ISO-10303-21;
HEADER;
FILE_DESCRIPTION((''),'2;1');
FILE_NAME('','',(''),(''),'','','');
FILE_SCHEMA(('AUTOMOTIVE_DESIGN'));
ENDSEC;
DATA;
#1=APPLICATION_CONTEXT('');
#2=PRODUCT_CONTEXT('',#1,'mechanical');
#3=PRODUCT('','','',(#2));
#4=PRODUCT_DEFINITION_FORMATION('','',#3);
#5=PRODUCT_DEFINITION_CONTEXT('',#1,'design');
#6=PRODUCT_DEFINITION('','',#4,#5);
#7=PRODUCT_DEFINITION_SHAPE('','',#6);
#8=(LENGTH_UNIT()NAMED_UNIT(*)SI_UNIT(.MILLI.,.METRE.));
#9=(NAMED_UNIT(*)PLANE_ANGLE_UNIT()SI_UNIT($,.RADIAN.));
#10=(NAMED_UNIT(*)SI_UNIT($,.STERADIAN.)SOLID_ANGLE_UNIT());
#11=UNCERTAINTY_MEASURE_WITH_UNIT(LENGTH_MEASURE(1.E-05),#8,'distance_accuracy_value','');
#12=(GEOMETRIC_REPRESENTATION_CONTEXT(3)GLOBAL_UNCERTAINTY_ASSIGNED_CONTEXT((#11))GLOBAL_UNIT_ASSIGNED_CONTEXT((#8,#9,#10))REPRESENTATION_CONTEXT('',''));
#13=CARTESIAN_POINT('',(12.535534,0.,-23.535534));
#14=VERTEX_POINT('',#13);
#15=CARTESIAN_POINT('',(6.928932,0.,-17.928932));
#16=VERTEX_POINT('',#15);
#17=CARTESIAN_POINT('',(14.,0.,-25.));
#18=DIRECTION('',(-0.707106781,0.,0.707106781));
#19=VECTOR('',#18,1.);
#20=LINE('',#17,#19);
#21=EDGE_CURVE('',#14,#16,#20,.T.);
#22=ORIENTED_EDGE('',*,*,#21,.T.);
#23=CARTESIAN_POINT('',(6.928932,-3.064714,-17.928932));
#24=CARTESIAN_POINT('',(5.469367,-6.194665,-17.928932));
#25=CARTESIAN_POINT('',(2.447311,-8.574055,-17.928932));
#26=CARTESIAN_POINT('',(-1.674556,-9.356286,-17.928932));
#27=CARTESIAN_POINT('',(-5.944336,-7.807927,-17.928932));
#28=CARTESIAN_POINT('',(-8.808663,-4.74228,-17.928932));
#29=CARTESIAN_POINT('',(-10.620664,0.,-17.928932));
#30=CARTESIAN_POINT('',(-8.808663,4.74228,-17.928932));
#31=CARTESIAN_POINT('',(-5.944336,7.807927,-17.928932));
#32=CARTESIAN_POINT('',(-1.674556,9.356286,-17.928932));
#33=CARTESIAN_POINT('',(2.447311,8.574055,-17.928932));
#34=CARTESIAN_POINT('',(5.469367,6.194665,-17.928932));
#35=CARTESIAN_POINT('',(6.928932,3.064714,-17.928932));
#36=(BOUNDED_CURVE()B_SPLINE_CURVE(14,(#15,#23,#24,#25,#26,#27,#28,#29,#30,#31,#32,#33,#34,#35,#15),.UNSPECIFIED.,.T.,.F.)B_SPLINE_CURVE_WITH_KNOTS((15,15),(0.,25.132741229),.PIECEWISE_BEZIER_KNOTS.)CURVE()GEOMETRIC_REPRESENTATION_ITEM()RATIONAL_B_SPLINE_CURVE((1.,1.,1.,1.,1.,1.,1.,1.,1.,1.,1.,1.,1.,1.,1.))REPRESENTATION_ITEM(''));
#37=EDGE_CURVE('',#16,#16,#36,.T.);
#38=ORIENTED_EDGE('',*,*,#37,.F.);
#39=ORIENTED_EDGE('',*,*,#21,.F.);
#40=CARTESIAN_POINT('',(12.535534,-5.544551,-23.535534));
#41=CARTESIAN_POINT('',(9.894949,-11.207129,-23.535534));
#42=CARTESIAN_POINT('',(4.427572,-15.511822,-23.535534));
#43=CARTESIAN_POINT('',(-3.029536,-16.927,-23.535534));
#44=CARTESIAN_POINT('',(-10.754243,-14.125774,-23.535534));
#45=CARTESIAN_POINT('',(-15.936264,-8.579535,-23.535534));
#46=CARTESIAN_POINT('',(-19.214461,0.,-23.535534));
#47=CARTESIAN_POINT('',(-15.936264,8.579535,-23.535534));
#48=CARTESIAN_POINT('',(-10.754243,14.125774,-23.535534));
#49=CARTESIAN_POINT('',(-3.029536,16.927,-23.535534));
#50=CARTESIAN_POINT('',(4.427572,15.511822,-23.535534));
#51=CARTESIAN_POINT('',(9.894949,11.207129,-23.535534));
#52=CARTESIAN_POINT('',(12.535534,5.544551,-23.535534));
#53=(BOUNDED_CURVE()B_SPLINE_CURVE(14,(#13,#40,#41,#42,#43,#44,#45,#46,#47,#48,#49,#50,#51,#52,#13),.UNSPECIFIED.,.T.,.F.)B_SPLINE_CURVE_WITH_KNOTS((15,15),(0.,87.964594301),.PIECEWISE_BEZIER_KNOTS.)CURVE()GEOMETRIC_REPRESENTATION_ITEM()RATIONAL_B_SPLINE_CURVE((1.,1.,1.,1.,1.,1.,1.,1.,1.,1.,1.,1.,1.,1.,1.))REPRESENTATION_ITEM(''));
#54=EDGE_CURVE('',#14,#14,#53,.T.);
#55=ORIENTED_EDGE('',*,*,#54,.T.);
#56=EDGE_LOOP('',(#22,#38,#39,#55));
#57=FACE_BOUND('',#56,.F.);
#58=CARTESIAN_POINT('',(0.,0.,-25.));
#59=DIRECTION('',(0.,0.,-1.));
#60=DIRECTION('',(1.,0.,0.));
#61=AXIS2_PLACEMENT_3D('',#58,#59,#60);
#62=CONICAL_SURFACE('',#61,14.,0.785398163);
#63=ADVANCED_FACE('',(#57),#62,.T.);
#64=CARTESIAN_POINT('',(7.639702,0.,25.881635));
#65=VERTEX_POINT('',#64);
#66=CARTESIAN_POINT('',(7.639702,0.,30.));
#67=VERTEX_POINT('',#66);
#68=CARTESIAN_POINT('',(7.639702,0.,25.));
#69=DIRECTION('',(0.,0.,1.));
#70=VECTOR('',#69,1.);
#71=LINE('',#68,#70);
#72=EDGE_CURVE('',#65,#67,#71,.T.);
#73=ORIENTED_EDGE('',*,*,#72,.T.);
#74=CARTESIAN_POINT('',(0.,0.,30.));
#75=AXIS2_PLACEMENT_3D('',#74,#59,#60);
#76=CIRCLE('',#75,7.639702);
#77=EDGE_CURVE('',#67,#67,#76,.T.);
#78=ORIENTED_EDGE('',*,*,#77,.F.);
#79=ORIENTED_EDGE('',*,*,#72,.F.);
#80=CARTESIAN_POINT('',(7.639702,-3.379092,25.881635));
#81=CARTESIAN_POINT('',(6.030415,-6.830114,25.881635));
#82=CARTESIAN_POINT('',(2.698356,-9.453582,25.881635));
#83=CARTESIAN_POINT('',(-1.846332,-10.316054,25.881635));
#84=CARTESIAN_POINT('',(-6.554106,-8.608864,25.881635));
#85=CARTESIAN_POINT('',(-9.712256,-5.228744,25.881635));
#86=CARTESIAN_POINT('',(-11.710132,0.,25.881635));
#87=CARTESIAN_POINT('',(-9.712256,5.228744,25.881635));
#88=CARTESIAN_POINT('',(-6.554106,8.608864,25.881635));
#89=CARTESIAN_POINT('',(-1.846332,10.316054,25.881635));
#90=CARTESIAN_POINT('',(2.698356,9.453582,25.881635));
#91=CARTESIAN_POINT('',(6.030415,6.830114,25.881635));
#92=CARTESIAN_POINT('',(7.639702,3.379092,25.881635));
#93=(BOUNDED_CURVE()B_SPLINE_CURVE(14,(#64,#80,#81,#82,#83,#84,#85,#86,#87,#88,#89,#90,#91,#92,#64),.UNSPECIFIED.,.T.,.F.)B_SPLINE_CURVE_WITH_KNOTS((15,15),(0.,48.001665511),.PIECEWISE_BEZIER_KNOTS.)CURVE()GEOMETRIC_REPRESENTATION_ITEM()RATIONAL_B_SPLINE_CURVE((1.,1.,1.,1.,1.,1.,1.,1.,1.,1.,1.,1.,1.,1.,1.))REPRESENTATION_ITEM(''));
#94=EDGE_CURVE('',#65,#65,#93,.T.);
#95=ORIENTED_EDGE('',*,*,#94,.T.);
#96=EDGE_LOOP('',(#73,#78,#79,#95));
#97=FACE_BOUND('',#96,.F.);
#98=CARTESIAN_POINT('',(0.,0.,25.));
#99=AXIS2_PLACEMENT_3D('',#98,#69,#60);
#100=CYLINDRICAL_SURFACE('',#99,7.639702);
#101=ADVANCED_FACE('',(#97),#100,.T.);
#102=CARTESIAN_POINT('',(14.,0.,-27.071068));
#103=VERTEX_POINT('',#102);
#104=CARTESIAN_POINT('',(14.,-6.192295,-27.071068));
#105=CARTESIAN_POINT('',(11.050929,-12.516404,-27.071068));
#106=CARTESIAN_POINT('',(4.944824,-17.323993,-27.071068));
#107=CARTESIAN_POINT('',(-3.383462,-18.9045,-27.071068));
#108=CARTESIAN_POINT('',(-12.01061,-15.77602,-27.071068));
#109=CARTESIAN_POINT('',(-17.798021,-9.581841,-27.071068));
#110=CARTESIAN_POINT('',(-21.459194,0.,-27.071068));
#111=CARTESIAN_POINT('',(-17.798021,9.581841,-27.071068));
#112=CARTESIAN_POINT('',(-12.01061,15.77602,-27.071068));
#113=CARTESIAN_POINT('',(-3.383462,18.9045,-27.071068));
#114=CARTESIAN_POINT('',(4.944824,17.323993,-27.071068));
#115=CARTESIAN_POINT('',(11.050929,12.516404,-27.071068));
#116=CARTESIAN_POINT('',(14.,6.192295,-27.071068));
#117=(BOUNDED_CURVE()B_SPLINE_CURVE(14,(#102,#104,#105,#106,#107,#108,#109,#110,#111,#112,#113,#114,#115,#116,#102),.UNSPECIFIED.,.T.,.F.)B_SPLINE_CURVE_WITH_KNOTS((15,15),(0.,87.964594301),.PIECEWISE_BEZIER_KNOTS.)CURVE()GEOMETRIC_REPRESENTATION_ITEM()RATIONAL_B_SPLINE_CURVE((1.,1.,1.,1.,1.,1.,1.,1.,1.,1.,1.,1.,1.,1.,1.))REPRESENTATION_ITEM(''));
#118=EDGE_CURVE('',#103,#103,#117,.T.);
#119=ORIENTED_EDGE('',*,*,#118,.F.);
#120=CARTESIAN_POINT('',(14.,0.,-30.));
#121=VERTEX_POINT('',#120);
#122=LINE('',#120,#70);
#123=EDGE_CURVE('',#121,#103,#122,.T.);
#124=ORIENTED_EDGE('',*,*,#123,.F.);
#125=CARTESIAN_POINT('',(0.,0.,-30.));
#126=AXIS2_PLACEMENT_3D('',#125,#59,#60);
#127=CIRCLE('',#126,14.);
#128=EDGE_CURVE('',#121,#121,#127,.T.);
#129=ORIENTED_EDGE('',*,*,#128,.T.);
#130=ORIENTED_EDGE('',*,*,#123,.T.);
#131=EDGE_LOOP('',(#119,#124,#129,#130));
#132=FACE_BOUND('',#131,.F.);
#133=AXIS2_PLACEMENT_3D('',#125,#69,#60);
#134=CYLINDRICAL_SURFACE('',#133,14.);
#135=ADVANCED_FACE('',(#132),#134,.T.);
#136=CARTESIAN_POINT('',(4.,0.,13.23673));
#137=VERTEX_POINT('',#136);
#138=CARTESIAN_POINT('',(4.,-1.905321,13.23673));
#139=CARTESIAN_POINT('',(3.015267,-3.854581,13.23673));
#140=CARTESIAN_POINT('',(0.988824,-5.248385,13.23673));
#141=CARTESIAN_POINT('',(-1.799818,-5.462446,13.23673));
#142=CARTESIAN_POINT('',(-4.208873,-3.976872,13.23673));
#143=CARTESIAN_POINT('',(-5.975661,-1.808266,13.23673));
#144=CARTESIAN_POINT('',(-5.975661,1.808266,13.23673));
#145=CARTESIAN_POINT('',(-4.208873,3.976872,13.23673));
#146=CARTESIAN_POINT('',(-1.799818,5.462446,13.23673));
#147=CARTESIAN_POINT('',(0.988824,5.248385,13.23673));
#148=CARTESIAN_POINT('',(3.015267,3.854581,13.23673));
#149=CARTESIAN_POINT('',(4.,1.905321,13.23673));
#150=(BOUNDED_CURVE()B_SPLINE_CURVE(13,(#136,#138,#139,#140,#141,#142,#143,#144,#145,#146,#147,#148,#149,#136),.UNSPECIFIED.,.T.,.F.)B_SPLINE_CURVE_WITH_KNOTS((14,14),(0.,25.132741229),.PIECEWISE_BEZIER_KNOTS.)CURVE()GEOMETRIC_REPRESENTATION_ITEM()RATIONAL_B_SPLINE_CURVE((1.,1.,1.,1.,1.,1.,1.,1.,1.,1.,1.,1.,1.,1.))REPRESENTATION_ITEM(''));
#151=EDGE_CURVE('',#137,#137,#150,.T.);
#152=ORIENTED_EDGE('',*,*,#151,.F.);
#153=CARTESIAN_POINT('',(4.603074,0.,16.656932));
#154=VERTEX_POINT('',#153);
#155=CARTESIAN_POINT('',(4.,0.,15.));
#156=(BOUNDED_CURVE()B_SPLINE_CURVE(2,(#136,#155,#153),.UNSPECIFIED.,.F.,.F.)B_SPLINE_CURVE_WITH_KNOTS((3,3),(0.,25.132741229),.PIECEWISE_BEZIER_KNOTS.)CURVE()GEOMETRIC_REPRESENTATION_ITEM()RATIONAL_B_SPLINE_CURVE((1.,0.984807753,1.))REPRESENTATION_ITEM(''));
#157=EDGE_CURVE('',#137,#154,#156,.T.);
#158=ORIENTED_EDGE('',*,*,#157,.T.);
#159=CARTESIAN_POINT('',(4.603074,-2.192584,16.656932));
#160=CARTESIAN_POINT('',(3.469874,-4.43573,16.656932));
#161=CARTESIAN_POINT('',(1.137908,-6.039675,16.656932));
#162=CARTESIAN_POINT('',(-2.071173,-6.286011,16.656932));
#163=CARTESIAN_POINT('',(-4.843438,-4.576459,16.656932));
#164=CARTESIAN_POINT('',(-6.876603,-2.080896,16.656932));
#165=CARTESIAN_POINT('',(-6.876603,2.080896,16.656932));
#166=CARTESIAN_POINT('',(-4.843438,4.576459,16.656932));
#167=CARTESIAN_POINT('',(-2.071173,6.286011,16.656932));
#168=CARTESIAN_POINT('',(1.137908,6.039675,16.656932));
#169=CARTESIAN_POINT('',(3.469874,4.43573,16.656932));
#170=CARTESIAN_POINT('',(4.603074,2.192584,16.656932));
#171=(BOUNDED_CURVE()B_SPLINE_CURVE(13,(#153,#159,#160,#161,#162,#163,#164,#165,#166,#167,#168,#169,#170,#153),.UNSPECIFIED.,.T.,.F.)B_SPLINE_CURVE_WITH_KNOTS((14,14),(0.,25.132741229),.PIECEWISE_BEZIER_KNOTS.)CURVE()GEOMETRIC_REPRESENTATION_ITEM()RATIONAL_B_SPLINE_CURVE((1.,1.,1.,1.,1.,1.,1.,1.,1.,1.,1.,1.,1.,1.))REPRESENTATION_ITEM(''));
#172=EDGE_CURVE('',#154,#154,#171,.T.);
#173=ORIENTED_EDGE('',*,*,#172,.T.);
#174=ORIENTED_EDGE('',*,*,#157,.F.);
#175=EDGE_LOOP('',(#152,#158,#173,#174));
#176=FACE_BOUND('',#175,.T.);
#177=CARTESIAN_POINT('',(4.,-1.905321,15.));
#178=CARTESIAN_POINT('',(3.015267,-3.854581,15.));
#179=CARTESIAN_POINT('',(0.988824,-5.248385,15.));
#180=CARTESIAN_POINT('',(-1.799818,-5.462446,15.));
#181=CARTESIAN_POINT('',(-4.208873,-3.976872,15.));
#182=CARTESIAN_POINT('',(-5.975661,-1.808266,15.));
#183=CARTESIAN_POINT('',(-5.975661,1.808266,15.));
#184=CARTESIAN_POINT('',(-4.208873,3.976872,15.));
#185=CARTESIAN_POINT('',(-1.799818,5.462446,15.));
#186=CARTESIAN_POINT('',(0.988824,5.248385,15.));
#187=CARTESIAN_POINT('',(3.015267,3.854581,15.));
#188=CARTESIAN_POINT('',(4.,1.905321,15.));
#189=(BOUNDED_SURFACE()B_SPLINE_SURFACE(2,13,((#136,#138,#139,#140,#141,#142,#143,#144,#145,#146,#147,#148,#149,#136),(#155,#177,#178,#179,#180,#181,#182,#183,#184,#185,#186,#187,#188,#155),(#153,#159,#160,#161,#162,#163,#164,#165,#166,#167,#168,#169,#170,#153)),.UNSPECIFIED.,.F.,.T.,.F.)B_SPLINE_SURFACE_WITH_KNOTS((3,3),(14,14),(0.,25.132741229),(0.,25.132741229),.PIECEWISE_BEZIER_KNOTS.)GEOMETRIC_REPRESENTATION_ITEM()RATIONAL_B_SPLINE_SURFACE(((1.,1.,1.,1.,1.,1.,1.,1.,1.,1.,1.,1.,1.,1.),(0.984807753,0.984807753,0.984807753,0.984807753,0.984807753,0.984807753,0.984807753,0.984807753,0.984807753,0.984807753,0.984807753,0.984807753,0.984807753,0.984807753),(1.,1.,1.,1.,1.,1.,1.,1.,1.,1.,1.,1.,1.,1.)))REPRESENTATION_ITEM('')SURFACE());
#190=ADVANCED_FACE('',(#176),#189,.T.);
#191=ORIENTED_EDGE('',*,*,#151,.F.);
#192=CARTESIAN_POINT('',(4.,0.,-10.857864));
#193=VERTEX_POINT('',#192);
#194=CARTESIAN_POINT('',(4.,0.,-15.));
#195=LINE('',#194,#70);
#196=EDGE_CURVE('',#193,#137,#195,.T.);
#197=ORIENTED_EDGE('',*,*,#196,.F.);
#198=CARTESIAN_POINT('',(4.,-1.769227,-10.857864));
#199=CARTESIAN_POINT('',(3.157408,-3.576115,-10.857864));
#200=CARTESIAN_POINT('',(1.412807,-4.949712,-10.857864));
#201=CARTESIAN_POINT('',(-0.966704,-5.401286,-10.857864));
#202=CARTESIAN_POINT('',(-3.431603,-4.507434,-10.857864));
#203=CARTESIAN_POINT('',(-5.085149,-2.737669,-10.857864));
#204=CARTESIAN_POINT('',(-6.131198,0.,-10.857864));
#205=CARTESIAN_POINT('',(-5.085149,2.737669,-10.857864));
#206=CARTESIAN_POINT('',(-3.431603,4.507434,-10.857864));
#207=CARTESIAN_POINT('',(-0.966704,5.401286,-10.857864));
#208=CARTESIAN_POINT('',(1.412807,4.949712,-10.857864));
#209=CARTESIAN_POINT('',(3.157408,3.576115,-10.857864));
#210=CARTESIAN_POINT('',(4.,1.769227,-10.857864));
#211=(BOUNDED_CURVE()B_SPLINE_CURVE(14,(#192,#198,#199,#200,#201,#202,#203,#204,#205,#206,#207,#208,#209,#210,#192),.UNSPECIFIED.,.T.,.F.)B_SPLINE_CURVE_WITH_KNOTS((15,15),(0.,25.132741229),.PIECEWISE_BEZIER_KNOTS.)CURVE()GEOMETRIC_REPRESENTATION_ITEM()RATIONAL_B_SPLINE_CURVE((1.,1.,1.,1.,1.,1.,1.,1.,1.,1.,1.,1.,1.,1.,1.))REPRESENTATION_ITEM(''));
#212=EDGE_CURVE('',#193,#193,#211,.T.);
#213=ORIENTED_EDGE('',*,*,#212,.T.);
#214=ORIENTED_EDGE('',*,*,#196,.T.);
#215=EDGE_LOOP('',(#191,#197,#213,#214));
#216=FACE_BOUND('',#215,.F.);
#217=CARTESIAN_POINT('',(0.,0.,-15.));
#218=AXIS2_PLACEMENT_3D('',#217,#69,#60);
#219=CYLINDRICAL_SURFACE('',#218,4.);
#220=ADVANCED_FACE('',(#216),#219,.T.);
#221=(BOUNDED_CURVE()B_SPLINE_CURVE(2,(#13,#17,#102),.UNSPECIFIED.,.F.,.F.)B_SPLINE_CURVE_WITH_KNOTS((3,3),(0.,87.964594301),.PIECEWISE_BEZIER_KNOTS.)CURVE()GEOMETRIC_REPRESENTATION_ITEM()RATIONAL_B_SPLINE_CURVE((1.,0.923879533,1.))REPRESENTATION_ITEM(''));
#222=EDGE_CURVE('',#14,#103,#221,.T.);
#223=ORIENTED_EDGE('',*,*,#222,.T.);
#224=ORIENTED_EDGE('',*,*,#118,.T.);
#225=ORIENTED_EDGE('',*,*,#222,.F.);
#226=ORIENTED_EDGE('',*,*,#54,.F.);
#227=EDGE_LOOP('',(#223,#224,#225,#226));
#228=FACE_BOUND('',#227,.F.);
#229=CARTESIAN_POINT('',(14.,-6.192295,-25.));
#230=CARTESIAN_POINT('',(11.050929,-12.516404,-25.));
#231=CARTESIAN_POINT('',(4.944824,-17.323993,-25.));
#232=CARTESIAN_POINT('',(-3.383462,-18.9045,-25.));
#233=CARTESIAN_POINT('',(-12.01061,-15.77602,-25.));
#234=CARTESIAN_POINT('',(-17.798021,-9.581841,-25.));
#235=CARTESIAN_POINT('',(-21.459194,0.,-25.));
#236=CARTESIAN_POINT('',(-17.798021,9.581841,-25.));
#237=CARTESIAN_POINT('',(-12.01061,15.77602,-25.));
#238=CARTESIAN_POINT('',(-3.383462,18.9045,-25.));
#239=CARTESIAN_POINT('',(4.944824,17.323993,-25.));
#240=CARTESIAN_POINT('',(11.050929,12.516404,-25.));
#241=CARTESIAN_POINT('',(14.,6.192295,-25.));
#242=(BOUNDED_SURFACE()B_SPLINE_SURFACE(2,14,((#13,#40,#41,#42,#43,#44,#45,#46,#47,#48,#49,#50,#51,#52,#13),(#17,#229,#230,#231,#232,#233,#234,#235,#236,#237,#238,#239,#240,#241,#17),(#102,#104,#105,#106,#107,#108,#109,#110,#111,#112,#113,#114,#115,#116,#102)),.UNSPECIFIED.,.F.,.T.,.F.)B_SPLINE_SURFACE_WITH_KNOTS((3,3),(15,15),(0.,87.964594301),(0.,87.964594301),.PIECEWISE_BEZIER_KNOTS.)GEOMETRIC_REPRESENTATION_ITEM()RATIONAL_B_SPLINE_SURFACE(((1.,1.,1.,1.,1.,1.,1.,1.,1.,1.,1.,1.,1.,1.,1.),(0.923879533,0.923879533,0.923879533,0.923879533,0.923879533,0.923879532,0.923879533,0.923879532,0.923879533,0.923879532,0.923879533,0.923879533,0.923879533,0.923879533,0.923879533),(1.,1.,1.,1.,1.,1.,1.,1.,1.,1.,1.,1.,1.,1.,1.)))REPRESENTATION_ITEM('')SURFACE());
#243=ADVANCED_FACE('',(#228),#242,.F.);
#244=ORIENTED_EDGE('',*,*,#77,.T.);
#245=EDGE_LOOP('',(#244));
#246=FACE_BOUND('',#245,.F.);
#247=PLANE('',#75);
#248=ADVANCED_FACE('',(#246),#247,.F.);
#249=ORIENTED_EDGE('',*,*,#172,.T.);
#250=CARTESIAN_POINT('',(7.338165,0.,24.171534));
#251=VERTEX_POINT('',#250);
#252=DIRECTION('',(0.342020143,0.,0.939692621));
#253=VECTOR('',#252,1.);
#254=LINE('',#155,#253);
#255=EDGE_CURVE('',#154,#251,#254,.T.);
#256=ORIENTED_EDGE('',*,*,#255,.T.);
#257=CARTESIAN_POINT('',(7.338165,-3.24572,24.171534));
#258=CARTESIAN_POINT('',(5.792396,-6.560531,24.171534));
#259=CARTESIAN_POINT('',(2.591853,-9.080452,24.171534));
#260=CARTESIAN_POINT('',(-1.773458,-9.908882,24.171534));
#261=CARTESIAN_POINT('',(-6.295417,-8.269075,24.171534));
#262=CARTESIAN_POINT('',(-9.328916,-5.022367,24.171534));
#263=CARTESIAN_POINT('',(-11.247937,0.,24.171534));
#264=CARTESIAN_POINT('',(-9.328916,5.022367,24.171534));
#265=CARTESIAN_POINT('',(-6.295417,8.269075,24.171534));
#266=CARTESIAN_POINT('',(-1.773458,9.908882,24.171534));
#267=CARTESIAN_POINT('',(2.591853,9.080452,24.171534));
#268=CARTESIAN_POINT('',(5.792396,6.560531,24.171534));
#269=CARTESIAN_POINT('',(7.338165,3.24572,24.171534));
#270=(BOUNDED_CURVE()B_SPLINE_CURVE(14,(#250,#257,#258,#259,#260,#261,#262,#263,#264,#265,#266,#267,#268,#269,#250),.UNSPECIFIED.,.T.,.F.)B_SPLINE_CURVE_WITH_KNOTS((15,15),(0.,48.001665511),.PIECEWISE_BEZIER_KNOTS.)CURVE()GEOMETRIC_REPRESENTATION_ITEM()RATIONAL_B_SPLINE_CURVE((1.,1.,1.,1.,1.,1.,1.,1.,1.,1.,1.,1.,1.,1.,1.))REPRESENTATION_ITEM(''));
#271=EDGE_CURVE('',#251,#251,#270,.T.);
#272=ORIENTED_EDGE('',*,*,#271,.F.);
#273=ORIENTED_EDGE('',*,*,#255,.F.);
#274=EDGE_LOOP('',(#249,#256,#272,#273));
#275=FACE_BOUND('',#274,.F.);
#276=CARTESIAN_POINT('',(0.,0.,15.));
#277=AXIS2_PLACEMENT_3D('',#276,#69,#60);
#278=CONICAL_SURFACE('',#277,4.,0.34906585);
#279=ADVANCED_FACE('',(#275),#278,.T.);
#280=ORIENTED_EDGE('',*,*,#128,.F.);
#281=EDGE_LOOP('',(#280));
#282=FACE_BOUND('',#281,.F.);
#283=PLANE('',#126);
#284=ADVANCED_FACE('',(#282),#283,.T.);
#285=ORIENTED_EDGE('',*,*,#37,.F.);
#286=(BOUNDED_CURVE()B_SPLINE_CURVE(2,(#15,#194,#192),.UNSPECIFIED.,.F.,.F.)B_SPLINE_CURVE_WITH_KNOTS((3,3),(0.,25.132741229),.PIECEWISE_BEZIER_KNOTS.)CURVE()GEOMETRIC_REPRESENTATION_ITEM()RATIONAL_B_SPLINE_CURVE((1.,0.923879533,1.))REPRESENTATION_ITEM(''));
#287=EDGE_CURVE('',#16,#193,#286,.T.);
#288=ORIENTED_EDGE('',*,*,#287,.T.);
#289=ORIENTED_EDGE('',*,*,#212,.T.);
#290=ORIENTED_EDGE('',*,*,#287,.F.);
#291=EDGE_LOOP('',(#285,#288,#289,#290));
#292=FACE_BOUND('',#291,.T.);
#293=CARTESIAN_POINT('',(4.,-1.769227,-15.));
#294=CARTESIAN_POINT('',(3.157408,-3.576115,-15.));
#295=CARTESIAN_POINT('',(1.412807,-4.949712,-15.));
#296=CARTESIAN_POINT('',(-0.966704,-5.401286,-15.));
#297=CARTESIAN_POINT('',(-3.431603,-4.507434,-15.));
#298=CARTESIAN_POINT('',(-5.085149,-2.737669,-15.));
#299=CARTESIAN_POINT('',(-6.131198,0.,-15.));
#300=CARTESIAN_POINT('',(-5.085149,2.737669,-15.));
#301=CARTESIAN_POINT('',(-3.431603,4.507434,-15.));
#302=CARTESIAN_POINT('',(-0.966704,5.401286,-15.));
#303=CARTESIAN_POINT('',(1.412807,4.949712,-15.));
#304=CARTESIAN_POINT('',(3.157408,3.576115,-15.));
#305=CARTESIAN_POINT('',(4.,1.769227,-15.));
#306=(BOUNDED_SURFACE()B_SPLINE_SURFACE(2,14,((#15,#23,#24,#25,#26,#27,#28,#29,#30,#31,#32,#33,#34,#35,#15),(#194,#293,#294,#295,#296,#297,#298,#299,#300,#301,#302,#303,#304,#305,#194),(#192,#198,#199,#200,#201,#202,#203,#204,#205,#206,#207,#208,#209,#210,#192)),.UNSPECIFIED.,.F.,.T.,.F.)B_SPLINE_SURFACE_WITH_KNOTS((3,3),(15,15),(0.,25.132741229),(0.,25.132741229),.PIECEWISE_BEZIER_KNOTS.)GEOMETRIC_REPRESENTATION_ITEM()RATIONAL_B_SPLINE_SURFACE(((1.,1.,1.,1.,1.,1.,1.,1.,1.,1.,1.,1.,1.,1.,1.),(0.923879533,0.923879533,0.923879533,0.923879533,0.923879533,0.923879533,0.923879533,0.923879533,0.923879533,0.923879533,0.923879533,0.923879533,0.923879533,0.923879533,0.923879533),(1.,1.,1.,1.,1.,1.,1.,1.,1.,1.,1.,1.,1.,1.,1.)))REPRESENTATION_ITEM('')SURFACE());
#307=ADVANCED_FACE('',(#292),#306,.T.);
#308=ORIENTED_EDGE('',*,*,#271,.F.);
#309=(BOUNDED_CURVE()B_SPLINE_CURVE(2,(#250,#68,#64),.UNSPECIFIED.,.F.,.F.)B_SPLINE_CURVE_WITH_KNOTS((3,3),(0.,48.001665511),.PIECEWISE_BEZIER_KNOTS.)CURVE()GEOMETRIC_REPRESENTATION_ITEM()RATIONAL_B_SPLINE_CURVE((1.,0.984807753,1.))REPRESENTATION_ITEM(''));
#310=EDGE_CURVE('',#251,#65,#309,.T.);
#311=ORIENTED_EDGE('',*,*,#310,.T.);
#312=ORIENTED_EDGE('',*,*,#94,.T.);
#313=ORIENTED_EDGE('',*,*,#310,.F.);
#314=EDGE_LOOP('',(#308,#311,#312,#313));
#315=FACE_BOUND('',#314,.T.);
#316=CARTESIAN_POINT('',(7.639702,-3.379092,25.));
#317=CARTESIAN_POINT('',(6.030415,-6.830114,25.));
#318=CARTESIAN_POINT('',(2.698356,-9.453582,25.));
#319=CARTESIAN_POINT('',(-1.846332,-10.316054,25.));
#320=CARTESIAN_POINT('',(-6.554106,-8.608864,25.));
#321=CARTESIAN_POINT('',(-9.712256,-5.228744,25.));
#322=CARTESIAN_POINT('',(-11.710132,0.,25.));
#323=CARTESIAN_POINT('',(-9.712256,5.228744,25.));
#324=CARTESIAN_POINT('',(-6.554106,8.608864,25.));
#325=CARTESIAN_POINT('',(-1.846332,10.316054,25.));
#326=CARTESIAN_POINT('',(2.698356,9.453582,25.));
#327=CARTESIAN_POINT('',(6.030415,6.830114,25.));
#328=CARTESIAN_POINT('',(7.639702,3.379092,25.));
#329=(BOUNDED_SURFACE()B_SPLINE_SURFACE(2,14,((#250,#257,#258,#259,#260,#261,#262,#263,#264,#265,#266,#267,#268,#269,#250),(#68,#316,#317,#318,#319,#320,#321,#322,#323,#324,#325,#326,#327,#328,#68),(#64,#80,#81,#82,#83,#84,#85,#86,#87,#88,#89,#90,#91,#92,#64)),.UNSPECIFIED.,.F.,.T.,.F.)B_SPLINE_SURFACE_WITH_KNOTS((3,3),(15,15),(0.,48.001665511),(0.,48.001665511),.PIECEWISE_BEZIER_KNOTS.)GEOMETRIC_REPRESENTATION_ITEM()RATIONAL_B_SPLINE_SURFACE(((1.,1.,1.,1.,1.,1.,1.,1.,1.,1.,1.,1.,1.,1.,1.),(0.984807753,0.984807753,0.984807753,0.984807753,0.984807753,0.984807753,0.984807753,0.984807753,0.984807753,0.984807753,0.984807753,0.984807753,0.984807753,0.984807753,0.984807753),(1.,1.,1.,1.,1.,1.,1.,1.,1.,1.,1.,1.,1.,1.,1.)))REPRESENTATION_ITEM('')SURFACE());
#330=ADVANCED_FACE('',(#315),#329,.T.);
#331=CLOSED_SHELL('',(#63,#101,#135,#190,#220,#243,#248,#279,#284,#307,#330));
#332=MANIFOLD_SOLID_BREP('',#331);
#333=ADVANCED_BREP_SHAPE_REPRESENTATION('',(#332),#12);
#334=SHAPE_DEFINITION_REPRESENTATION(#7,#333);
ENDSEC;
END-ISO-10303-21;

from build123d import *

# Parameters (mm, degrees)
F2_R = 10
F3_R = 5


with BuildPart() as f1:
    # F0 (on Front) → F1 (revolve)
    with BuildSketch(Plane.XZ):
        Polygon((7.6397023427, 30), (0, 30), (0, -30), (7.6397023427, -30), (14, -30), (14, -25), (4, -15), (4, 0), (4, 15), (7.6397023427, 25), align=None)
    revolve(axis=Axis((0, 0, 0), (0, 0, -1)))

    # F2
    f2_edges = [f1.edges().sort_by_distance(p)[0] for p in [
        (-4, 0, 15),
        (-4, 0, -15),
    ]]
    fillet(f2_edges, radius=F2_R)

    # F3
    f3_edges = [f1.edges().sort_by_distance(p)[0] for p in [
        (-7.639702, 0, 25),
        (-14, 0, -25),
    ]]
    fillet(f3_edges, radius=F3_R)


solid = f1.part
